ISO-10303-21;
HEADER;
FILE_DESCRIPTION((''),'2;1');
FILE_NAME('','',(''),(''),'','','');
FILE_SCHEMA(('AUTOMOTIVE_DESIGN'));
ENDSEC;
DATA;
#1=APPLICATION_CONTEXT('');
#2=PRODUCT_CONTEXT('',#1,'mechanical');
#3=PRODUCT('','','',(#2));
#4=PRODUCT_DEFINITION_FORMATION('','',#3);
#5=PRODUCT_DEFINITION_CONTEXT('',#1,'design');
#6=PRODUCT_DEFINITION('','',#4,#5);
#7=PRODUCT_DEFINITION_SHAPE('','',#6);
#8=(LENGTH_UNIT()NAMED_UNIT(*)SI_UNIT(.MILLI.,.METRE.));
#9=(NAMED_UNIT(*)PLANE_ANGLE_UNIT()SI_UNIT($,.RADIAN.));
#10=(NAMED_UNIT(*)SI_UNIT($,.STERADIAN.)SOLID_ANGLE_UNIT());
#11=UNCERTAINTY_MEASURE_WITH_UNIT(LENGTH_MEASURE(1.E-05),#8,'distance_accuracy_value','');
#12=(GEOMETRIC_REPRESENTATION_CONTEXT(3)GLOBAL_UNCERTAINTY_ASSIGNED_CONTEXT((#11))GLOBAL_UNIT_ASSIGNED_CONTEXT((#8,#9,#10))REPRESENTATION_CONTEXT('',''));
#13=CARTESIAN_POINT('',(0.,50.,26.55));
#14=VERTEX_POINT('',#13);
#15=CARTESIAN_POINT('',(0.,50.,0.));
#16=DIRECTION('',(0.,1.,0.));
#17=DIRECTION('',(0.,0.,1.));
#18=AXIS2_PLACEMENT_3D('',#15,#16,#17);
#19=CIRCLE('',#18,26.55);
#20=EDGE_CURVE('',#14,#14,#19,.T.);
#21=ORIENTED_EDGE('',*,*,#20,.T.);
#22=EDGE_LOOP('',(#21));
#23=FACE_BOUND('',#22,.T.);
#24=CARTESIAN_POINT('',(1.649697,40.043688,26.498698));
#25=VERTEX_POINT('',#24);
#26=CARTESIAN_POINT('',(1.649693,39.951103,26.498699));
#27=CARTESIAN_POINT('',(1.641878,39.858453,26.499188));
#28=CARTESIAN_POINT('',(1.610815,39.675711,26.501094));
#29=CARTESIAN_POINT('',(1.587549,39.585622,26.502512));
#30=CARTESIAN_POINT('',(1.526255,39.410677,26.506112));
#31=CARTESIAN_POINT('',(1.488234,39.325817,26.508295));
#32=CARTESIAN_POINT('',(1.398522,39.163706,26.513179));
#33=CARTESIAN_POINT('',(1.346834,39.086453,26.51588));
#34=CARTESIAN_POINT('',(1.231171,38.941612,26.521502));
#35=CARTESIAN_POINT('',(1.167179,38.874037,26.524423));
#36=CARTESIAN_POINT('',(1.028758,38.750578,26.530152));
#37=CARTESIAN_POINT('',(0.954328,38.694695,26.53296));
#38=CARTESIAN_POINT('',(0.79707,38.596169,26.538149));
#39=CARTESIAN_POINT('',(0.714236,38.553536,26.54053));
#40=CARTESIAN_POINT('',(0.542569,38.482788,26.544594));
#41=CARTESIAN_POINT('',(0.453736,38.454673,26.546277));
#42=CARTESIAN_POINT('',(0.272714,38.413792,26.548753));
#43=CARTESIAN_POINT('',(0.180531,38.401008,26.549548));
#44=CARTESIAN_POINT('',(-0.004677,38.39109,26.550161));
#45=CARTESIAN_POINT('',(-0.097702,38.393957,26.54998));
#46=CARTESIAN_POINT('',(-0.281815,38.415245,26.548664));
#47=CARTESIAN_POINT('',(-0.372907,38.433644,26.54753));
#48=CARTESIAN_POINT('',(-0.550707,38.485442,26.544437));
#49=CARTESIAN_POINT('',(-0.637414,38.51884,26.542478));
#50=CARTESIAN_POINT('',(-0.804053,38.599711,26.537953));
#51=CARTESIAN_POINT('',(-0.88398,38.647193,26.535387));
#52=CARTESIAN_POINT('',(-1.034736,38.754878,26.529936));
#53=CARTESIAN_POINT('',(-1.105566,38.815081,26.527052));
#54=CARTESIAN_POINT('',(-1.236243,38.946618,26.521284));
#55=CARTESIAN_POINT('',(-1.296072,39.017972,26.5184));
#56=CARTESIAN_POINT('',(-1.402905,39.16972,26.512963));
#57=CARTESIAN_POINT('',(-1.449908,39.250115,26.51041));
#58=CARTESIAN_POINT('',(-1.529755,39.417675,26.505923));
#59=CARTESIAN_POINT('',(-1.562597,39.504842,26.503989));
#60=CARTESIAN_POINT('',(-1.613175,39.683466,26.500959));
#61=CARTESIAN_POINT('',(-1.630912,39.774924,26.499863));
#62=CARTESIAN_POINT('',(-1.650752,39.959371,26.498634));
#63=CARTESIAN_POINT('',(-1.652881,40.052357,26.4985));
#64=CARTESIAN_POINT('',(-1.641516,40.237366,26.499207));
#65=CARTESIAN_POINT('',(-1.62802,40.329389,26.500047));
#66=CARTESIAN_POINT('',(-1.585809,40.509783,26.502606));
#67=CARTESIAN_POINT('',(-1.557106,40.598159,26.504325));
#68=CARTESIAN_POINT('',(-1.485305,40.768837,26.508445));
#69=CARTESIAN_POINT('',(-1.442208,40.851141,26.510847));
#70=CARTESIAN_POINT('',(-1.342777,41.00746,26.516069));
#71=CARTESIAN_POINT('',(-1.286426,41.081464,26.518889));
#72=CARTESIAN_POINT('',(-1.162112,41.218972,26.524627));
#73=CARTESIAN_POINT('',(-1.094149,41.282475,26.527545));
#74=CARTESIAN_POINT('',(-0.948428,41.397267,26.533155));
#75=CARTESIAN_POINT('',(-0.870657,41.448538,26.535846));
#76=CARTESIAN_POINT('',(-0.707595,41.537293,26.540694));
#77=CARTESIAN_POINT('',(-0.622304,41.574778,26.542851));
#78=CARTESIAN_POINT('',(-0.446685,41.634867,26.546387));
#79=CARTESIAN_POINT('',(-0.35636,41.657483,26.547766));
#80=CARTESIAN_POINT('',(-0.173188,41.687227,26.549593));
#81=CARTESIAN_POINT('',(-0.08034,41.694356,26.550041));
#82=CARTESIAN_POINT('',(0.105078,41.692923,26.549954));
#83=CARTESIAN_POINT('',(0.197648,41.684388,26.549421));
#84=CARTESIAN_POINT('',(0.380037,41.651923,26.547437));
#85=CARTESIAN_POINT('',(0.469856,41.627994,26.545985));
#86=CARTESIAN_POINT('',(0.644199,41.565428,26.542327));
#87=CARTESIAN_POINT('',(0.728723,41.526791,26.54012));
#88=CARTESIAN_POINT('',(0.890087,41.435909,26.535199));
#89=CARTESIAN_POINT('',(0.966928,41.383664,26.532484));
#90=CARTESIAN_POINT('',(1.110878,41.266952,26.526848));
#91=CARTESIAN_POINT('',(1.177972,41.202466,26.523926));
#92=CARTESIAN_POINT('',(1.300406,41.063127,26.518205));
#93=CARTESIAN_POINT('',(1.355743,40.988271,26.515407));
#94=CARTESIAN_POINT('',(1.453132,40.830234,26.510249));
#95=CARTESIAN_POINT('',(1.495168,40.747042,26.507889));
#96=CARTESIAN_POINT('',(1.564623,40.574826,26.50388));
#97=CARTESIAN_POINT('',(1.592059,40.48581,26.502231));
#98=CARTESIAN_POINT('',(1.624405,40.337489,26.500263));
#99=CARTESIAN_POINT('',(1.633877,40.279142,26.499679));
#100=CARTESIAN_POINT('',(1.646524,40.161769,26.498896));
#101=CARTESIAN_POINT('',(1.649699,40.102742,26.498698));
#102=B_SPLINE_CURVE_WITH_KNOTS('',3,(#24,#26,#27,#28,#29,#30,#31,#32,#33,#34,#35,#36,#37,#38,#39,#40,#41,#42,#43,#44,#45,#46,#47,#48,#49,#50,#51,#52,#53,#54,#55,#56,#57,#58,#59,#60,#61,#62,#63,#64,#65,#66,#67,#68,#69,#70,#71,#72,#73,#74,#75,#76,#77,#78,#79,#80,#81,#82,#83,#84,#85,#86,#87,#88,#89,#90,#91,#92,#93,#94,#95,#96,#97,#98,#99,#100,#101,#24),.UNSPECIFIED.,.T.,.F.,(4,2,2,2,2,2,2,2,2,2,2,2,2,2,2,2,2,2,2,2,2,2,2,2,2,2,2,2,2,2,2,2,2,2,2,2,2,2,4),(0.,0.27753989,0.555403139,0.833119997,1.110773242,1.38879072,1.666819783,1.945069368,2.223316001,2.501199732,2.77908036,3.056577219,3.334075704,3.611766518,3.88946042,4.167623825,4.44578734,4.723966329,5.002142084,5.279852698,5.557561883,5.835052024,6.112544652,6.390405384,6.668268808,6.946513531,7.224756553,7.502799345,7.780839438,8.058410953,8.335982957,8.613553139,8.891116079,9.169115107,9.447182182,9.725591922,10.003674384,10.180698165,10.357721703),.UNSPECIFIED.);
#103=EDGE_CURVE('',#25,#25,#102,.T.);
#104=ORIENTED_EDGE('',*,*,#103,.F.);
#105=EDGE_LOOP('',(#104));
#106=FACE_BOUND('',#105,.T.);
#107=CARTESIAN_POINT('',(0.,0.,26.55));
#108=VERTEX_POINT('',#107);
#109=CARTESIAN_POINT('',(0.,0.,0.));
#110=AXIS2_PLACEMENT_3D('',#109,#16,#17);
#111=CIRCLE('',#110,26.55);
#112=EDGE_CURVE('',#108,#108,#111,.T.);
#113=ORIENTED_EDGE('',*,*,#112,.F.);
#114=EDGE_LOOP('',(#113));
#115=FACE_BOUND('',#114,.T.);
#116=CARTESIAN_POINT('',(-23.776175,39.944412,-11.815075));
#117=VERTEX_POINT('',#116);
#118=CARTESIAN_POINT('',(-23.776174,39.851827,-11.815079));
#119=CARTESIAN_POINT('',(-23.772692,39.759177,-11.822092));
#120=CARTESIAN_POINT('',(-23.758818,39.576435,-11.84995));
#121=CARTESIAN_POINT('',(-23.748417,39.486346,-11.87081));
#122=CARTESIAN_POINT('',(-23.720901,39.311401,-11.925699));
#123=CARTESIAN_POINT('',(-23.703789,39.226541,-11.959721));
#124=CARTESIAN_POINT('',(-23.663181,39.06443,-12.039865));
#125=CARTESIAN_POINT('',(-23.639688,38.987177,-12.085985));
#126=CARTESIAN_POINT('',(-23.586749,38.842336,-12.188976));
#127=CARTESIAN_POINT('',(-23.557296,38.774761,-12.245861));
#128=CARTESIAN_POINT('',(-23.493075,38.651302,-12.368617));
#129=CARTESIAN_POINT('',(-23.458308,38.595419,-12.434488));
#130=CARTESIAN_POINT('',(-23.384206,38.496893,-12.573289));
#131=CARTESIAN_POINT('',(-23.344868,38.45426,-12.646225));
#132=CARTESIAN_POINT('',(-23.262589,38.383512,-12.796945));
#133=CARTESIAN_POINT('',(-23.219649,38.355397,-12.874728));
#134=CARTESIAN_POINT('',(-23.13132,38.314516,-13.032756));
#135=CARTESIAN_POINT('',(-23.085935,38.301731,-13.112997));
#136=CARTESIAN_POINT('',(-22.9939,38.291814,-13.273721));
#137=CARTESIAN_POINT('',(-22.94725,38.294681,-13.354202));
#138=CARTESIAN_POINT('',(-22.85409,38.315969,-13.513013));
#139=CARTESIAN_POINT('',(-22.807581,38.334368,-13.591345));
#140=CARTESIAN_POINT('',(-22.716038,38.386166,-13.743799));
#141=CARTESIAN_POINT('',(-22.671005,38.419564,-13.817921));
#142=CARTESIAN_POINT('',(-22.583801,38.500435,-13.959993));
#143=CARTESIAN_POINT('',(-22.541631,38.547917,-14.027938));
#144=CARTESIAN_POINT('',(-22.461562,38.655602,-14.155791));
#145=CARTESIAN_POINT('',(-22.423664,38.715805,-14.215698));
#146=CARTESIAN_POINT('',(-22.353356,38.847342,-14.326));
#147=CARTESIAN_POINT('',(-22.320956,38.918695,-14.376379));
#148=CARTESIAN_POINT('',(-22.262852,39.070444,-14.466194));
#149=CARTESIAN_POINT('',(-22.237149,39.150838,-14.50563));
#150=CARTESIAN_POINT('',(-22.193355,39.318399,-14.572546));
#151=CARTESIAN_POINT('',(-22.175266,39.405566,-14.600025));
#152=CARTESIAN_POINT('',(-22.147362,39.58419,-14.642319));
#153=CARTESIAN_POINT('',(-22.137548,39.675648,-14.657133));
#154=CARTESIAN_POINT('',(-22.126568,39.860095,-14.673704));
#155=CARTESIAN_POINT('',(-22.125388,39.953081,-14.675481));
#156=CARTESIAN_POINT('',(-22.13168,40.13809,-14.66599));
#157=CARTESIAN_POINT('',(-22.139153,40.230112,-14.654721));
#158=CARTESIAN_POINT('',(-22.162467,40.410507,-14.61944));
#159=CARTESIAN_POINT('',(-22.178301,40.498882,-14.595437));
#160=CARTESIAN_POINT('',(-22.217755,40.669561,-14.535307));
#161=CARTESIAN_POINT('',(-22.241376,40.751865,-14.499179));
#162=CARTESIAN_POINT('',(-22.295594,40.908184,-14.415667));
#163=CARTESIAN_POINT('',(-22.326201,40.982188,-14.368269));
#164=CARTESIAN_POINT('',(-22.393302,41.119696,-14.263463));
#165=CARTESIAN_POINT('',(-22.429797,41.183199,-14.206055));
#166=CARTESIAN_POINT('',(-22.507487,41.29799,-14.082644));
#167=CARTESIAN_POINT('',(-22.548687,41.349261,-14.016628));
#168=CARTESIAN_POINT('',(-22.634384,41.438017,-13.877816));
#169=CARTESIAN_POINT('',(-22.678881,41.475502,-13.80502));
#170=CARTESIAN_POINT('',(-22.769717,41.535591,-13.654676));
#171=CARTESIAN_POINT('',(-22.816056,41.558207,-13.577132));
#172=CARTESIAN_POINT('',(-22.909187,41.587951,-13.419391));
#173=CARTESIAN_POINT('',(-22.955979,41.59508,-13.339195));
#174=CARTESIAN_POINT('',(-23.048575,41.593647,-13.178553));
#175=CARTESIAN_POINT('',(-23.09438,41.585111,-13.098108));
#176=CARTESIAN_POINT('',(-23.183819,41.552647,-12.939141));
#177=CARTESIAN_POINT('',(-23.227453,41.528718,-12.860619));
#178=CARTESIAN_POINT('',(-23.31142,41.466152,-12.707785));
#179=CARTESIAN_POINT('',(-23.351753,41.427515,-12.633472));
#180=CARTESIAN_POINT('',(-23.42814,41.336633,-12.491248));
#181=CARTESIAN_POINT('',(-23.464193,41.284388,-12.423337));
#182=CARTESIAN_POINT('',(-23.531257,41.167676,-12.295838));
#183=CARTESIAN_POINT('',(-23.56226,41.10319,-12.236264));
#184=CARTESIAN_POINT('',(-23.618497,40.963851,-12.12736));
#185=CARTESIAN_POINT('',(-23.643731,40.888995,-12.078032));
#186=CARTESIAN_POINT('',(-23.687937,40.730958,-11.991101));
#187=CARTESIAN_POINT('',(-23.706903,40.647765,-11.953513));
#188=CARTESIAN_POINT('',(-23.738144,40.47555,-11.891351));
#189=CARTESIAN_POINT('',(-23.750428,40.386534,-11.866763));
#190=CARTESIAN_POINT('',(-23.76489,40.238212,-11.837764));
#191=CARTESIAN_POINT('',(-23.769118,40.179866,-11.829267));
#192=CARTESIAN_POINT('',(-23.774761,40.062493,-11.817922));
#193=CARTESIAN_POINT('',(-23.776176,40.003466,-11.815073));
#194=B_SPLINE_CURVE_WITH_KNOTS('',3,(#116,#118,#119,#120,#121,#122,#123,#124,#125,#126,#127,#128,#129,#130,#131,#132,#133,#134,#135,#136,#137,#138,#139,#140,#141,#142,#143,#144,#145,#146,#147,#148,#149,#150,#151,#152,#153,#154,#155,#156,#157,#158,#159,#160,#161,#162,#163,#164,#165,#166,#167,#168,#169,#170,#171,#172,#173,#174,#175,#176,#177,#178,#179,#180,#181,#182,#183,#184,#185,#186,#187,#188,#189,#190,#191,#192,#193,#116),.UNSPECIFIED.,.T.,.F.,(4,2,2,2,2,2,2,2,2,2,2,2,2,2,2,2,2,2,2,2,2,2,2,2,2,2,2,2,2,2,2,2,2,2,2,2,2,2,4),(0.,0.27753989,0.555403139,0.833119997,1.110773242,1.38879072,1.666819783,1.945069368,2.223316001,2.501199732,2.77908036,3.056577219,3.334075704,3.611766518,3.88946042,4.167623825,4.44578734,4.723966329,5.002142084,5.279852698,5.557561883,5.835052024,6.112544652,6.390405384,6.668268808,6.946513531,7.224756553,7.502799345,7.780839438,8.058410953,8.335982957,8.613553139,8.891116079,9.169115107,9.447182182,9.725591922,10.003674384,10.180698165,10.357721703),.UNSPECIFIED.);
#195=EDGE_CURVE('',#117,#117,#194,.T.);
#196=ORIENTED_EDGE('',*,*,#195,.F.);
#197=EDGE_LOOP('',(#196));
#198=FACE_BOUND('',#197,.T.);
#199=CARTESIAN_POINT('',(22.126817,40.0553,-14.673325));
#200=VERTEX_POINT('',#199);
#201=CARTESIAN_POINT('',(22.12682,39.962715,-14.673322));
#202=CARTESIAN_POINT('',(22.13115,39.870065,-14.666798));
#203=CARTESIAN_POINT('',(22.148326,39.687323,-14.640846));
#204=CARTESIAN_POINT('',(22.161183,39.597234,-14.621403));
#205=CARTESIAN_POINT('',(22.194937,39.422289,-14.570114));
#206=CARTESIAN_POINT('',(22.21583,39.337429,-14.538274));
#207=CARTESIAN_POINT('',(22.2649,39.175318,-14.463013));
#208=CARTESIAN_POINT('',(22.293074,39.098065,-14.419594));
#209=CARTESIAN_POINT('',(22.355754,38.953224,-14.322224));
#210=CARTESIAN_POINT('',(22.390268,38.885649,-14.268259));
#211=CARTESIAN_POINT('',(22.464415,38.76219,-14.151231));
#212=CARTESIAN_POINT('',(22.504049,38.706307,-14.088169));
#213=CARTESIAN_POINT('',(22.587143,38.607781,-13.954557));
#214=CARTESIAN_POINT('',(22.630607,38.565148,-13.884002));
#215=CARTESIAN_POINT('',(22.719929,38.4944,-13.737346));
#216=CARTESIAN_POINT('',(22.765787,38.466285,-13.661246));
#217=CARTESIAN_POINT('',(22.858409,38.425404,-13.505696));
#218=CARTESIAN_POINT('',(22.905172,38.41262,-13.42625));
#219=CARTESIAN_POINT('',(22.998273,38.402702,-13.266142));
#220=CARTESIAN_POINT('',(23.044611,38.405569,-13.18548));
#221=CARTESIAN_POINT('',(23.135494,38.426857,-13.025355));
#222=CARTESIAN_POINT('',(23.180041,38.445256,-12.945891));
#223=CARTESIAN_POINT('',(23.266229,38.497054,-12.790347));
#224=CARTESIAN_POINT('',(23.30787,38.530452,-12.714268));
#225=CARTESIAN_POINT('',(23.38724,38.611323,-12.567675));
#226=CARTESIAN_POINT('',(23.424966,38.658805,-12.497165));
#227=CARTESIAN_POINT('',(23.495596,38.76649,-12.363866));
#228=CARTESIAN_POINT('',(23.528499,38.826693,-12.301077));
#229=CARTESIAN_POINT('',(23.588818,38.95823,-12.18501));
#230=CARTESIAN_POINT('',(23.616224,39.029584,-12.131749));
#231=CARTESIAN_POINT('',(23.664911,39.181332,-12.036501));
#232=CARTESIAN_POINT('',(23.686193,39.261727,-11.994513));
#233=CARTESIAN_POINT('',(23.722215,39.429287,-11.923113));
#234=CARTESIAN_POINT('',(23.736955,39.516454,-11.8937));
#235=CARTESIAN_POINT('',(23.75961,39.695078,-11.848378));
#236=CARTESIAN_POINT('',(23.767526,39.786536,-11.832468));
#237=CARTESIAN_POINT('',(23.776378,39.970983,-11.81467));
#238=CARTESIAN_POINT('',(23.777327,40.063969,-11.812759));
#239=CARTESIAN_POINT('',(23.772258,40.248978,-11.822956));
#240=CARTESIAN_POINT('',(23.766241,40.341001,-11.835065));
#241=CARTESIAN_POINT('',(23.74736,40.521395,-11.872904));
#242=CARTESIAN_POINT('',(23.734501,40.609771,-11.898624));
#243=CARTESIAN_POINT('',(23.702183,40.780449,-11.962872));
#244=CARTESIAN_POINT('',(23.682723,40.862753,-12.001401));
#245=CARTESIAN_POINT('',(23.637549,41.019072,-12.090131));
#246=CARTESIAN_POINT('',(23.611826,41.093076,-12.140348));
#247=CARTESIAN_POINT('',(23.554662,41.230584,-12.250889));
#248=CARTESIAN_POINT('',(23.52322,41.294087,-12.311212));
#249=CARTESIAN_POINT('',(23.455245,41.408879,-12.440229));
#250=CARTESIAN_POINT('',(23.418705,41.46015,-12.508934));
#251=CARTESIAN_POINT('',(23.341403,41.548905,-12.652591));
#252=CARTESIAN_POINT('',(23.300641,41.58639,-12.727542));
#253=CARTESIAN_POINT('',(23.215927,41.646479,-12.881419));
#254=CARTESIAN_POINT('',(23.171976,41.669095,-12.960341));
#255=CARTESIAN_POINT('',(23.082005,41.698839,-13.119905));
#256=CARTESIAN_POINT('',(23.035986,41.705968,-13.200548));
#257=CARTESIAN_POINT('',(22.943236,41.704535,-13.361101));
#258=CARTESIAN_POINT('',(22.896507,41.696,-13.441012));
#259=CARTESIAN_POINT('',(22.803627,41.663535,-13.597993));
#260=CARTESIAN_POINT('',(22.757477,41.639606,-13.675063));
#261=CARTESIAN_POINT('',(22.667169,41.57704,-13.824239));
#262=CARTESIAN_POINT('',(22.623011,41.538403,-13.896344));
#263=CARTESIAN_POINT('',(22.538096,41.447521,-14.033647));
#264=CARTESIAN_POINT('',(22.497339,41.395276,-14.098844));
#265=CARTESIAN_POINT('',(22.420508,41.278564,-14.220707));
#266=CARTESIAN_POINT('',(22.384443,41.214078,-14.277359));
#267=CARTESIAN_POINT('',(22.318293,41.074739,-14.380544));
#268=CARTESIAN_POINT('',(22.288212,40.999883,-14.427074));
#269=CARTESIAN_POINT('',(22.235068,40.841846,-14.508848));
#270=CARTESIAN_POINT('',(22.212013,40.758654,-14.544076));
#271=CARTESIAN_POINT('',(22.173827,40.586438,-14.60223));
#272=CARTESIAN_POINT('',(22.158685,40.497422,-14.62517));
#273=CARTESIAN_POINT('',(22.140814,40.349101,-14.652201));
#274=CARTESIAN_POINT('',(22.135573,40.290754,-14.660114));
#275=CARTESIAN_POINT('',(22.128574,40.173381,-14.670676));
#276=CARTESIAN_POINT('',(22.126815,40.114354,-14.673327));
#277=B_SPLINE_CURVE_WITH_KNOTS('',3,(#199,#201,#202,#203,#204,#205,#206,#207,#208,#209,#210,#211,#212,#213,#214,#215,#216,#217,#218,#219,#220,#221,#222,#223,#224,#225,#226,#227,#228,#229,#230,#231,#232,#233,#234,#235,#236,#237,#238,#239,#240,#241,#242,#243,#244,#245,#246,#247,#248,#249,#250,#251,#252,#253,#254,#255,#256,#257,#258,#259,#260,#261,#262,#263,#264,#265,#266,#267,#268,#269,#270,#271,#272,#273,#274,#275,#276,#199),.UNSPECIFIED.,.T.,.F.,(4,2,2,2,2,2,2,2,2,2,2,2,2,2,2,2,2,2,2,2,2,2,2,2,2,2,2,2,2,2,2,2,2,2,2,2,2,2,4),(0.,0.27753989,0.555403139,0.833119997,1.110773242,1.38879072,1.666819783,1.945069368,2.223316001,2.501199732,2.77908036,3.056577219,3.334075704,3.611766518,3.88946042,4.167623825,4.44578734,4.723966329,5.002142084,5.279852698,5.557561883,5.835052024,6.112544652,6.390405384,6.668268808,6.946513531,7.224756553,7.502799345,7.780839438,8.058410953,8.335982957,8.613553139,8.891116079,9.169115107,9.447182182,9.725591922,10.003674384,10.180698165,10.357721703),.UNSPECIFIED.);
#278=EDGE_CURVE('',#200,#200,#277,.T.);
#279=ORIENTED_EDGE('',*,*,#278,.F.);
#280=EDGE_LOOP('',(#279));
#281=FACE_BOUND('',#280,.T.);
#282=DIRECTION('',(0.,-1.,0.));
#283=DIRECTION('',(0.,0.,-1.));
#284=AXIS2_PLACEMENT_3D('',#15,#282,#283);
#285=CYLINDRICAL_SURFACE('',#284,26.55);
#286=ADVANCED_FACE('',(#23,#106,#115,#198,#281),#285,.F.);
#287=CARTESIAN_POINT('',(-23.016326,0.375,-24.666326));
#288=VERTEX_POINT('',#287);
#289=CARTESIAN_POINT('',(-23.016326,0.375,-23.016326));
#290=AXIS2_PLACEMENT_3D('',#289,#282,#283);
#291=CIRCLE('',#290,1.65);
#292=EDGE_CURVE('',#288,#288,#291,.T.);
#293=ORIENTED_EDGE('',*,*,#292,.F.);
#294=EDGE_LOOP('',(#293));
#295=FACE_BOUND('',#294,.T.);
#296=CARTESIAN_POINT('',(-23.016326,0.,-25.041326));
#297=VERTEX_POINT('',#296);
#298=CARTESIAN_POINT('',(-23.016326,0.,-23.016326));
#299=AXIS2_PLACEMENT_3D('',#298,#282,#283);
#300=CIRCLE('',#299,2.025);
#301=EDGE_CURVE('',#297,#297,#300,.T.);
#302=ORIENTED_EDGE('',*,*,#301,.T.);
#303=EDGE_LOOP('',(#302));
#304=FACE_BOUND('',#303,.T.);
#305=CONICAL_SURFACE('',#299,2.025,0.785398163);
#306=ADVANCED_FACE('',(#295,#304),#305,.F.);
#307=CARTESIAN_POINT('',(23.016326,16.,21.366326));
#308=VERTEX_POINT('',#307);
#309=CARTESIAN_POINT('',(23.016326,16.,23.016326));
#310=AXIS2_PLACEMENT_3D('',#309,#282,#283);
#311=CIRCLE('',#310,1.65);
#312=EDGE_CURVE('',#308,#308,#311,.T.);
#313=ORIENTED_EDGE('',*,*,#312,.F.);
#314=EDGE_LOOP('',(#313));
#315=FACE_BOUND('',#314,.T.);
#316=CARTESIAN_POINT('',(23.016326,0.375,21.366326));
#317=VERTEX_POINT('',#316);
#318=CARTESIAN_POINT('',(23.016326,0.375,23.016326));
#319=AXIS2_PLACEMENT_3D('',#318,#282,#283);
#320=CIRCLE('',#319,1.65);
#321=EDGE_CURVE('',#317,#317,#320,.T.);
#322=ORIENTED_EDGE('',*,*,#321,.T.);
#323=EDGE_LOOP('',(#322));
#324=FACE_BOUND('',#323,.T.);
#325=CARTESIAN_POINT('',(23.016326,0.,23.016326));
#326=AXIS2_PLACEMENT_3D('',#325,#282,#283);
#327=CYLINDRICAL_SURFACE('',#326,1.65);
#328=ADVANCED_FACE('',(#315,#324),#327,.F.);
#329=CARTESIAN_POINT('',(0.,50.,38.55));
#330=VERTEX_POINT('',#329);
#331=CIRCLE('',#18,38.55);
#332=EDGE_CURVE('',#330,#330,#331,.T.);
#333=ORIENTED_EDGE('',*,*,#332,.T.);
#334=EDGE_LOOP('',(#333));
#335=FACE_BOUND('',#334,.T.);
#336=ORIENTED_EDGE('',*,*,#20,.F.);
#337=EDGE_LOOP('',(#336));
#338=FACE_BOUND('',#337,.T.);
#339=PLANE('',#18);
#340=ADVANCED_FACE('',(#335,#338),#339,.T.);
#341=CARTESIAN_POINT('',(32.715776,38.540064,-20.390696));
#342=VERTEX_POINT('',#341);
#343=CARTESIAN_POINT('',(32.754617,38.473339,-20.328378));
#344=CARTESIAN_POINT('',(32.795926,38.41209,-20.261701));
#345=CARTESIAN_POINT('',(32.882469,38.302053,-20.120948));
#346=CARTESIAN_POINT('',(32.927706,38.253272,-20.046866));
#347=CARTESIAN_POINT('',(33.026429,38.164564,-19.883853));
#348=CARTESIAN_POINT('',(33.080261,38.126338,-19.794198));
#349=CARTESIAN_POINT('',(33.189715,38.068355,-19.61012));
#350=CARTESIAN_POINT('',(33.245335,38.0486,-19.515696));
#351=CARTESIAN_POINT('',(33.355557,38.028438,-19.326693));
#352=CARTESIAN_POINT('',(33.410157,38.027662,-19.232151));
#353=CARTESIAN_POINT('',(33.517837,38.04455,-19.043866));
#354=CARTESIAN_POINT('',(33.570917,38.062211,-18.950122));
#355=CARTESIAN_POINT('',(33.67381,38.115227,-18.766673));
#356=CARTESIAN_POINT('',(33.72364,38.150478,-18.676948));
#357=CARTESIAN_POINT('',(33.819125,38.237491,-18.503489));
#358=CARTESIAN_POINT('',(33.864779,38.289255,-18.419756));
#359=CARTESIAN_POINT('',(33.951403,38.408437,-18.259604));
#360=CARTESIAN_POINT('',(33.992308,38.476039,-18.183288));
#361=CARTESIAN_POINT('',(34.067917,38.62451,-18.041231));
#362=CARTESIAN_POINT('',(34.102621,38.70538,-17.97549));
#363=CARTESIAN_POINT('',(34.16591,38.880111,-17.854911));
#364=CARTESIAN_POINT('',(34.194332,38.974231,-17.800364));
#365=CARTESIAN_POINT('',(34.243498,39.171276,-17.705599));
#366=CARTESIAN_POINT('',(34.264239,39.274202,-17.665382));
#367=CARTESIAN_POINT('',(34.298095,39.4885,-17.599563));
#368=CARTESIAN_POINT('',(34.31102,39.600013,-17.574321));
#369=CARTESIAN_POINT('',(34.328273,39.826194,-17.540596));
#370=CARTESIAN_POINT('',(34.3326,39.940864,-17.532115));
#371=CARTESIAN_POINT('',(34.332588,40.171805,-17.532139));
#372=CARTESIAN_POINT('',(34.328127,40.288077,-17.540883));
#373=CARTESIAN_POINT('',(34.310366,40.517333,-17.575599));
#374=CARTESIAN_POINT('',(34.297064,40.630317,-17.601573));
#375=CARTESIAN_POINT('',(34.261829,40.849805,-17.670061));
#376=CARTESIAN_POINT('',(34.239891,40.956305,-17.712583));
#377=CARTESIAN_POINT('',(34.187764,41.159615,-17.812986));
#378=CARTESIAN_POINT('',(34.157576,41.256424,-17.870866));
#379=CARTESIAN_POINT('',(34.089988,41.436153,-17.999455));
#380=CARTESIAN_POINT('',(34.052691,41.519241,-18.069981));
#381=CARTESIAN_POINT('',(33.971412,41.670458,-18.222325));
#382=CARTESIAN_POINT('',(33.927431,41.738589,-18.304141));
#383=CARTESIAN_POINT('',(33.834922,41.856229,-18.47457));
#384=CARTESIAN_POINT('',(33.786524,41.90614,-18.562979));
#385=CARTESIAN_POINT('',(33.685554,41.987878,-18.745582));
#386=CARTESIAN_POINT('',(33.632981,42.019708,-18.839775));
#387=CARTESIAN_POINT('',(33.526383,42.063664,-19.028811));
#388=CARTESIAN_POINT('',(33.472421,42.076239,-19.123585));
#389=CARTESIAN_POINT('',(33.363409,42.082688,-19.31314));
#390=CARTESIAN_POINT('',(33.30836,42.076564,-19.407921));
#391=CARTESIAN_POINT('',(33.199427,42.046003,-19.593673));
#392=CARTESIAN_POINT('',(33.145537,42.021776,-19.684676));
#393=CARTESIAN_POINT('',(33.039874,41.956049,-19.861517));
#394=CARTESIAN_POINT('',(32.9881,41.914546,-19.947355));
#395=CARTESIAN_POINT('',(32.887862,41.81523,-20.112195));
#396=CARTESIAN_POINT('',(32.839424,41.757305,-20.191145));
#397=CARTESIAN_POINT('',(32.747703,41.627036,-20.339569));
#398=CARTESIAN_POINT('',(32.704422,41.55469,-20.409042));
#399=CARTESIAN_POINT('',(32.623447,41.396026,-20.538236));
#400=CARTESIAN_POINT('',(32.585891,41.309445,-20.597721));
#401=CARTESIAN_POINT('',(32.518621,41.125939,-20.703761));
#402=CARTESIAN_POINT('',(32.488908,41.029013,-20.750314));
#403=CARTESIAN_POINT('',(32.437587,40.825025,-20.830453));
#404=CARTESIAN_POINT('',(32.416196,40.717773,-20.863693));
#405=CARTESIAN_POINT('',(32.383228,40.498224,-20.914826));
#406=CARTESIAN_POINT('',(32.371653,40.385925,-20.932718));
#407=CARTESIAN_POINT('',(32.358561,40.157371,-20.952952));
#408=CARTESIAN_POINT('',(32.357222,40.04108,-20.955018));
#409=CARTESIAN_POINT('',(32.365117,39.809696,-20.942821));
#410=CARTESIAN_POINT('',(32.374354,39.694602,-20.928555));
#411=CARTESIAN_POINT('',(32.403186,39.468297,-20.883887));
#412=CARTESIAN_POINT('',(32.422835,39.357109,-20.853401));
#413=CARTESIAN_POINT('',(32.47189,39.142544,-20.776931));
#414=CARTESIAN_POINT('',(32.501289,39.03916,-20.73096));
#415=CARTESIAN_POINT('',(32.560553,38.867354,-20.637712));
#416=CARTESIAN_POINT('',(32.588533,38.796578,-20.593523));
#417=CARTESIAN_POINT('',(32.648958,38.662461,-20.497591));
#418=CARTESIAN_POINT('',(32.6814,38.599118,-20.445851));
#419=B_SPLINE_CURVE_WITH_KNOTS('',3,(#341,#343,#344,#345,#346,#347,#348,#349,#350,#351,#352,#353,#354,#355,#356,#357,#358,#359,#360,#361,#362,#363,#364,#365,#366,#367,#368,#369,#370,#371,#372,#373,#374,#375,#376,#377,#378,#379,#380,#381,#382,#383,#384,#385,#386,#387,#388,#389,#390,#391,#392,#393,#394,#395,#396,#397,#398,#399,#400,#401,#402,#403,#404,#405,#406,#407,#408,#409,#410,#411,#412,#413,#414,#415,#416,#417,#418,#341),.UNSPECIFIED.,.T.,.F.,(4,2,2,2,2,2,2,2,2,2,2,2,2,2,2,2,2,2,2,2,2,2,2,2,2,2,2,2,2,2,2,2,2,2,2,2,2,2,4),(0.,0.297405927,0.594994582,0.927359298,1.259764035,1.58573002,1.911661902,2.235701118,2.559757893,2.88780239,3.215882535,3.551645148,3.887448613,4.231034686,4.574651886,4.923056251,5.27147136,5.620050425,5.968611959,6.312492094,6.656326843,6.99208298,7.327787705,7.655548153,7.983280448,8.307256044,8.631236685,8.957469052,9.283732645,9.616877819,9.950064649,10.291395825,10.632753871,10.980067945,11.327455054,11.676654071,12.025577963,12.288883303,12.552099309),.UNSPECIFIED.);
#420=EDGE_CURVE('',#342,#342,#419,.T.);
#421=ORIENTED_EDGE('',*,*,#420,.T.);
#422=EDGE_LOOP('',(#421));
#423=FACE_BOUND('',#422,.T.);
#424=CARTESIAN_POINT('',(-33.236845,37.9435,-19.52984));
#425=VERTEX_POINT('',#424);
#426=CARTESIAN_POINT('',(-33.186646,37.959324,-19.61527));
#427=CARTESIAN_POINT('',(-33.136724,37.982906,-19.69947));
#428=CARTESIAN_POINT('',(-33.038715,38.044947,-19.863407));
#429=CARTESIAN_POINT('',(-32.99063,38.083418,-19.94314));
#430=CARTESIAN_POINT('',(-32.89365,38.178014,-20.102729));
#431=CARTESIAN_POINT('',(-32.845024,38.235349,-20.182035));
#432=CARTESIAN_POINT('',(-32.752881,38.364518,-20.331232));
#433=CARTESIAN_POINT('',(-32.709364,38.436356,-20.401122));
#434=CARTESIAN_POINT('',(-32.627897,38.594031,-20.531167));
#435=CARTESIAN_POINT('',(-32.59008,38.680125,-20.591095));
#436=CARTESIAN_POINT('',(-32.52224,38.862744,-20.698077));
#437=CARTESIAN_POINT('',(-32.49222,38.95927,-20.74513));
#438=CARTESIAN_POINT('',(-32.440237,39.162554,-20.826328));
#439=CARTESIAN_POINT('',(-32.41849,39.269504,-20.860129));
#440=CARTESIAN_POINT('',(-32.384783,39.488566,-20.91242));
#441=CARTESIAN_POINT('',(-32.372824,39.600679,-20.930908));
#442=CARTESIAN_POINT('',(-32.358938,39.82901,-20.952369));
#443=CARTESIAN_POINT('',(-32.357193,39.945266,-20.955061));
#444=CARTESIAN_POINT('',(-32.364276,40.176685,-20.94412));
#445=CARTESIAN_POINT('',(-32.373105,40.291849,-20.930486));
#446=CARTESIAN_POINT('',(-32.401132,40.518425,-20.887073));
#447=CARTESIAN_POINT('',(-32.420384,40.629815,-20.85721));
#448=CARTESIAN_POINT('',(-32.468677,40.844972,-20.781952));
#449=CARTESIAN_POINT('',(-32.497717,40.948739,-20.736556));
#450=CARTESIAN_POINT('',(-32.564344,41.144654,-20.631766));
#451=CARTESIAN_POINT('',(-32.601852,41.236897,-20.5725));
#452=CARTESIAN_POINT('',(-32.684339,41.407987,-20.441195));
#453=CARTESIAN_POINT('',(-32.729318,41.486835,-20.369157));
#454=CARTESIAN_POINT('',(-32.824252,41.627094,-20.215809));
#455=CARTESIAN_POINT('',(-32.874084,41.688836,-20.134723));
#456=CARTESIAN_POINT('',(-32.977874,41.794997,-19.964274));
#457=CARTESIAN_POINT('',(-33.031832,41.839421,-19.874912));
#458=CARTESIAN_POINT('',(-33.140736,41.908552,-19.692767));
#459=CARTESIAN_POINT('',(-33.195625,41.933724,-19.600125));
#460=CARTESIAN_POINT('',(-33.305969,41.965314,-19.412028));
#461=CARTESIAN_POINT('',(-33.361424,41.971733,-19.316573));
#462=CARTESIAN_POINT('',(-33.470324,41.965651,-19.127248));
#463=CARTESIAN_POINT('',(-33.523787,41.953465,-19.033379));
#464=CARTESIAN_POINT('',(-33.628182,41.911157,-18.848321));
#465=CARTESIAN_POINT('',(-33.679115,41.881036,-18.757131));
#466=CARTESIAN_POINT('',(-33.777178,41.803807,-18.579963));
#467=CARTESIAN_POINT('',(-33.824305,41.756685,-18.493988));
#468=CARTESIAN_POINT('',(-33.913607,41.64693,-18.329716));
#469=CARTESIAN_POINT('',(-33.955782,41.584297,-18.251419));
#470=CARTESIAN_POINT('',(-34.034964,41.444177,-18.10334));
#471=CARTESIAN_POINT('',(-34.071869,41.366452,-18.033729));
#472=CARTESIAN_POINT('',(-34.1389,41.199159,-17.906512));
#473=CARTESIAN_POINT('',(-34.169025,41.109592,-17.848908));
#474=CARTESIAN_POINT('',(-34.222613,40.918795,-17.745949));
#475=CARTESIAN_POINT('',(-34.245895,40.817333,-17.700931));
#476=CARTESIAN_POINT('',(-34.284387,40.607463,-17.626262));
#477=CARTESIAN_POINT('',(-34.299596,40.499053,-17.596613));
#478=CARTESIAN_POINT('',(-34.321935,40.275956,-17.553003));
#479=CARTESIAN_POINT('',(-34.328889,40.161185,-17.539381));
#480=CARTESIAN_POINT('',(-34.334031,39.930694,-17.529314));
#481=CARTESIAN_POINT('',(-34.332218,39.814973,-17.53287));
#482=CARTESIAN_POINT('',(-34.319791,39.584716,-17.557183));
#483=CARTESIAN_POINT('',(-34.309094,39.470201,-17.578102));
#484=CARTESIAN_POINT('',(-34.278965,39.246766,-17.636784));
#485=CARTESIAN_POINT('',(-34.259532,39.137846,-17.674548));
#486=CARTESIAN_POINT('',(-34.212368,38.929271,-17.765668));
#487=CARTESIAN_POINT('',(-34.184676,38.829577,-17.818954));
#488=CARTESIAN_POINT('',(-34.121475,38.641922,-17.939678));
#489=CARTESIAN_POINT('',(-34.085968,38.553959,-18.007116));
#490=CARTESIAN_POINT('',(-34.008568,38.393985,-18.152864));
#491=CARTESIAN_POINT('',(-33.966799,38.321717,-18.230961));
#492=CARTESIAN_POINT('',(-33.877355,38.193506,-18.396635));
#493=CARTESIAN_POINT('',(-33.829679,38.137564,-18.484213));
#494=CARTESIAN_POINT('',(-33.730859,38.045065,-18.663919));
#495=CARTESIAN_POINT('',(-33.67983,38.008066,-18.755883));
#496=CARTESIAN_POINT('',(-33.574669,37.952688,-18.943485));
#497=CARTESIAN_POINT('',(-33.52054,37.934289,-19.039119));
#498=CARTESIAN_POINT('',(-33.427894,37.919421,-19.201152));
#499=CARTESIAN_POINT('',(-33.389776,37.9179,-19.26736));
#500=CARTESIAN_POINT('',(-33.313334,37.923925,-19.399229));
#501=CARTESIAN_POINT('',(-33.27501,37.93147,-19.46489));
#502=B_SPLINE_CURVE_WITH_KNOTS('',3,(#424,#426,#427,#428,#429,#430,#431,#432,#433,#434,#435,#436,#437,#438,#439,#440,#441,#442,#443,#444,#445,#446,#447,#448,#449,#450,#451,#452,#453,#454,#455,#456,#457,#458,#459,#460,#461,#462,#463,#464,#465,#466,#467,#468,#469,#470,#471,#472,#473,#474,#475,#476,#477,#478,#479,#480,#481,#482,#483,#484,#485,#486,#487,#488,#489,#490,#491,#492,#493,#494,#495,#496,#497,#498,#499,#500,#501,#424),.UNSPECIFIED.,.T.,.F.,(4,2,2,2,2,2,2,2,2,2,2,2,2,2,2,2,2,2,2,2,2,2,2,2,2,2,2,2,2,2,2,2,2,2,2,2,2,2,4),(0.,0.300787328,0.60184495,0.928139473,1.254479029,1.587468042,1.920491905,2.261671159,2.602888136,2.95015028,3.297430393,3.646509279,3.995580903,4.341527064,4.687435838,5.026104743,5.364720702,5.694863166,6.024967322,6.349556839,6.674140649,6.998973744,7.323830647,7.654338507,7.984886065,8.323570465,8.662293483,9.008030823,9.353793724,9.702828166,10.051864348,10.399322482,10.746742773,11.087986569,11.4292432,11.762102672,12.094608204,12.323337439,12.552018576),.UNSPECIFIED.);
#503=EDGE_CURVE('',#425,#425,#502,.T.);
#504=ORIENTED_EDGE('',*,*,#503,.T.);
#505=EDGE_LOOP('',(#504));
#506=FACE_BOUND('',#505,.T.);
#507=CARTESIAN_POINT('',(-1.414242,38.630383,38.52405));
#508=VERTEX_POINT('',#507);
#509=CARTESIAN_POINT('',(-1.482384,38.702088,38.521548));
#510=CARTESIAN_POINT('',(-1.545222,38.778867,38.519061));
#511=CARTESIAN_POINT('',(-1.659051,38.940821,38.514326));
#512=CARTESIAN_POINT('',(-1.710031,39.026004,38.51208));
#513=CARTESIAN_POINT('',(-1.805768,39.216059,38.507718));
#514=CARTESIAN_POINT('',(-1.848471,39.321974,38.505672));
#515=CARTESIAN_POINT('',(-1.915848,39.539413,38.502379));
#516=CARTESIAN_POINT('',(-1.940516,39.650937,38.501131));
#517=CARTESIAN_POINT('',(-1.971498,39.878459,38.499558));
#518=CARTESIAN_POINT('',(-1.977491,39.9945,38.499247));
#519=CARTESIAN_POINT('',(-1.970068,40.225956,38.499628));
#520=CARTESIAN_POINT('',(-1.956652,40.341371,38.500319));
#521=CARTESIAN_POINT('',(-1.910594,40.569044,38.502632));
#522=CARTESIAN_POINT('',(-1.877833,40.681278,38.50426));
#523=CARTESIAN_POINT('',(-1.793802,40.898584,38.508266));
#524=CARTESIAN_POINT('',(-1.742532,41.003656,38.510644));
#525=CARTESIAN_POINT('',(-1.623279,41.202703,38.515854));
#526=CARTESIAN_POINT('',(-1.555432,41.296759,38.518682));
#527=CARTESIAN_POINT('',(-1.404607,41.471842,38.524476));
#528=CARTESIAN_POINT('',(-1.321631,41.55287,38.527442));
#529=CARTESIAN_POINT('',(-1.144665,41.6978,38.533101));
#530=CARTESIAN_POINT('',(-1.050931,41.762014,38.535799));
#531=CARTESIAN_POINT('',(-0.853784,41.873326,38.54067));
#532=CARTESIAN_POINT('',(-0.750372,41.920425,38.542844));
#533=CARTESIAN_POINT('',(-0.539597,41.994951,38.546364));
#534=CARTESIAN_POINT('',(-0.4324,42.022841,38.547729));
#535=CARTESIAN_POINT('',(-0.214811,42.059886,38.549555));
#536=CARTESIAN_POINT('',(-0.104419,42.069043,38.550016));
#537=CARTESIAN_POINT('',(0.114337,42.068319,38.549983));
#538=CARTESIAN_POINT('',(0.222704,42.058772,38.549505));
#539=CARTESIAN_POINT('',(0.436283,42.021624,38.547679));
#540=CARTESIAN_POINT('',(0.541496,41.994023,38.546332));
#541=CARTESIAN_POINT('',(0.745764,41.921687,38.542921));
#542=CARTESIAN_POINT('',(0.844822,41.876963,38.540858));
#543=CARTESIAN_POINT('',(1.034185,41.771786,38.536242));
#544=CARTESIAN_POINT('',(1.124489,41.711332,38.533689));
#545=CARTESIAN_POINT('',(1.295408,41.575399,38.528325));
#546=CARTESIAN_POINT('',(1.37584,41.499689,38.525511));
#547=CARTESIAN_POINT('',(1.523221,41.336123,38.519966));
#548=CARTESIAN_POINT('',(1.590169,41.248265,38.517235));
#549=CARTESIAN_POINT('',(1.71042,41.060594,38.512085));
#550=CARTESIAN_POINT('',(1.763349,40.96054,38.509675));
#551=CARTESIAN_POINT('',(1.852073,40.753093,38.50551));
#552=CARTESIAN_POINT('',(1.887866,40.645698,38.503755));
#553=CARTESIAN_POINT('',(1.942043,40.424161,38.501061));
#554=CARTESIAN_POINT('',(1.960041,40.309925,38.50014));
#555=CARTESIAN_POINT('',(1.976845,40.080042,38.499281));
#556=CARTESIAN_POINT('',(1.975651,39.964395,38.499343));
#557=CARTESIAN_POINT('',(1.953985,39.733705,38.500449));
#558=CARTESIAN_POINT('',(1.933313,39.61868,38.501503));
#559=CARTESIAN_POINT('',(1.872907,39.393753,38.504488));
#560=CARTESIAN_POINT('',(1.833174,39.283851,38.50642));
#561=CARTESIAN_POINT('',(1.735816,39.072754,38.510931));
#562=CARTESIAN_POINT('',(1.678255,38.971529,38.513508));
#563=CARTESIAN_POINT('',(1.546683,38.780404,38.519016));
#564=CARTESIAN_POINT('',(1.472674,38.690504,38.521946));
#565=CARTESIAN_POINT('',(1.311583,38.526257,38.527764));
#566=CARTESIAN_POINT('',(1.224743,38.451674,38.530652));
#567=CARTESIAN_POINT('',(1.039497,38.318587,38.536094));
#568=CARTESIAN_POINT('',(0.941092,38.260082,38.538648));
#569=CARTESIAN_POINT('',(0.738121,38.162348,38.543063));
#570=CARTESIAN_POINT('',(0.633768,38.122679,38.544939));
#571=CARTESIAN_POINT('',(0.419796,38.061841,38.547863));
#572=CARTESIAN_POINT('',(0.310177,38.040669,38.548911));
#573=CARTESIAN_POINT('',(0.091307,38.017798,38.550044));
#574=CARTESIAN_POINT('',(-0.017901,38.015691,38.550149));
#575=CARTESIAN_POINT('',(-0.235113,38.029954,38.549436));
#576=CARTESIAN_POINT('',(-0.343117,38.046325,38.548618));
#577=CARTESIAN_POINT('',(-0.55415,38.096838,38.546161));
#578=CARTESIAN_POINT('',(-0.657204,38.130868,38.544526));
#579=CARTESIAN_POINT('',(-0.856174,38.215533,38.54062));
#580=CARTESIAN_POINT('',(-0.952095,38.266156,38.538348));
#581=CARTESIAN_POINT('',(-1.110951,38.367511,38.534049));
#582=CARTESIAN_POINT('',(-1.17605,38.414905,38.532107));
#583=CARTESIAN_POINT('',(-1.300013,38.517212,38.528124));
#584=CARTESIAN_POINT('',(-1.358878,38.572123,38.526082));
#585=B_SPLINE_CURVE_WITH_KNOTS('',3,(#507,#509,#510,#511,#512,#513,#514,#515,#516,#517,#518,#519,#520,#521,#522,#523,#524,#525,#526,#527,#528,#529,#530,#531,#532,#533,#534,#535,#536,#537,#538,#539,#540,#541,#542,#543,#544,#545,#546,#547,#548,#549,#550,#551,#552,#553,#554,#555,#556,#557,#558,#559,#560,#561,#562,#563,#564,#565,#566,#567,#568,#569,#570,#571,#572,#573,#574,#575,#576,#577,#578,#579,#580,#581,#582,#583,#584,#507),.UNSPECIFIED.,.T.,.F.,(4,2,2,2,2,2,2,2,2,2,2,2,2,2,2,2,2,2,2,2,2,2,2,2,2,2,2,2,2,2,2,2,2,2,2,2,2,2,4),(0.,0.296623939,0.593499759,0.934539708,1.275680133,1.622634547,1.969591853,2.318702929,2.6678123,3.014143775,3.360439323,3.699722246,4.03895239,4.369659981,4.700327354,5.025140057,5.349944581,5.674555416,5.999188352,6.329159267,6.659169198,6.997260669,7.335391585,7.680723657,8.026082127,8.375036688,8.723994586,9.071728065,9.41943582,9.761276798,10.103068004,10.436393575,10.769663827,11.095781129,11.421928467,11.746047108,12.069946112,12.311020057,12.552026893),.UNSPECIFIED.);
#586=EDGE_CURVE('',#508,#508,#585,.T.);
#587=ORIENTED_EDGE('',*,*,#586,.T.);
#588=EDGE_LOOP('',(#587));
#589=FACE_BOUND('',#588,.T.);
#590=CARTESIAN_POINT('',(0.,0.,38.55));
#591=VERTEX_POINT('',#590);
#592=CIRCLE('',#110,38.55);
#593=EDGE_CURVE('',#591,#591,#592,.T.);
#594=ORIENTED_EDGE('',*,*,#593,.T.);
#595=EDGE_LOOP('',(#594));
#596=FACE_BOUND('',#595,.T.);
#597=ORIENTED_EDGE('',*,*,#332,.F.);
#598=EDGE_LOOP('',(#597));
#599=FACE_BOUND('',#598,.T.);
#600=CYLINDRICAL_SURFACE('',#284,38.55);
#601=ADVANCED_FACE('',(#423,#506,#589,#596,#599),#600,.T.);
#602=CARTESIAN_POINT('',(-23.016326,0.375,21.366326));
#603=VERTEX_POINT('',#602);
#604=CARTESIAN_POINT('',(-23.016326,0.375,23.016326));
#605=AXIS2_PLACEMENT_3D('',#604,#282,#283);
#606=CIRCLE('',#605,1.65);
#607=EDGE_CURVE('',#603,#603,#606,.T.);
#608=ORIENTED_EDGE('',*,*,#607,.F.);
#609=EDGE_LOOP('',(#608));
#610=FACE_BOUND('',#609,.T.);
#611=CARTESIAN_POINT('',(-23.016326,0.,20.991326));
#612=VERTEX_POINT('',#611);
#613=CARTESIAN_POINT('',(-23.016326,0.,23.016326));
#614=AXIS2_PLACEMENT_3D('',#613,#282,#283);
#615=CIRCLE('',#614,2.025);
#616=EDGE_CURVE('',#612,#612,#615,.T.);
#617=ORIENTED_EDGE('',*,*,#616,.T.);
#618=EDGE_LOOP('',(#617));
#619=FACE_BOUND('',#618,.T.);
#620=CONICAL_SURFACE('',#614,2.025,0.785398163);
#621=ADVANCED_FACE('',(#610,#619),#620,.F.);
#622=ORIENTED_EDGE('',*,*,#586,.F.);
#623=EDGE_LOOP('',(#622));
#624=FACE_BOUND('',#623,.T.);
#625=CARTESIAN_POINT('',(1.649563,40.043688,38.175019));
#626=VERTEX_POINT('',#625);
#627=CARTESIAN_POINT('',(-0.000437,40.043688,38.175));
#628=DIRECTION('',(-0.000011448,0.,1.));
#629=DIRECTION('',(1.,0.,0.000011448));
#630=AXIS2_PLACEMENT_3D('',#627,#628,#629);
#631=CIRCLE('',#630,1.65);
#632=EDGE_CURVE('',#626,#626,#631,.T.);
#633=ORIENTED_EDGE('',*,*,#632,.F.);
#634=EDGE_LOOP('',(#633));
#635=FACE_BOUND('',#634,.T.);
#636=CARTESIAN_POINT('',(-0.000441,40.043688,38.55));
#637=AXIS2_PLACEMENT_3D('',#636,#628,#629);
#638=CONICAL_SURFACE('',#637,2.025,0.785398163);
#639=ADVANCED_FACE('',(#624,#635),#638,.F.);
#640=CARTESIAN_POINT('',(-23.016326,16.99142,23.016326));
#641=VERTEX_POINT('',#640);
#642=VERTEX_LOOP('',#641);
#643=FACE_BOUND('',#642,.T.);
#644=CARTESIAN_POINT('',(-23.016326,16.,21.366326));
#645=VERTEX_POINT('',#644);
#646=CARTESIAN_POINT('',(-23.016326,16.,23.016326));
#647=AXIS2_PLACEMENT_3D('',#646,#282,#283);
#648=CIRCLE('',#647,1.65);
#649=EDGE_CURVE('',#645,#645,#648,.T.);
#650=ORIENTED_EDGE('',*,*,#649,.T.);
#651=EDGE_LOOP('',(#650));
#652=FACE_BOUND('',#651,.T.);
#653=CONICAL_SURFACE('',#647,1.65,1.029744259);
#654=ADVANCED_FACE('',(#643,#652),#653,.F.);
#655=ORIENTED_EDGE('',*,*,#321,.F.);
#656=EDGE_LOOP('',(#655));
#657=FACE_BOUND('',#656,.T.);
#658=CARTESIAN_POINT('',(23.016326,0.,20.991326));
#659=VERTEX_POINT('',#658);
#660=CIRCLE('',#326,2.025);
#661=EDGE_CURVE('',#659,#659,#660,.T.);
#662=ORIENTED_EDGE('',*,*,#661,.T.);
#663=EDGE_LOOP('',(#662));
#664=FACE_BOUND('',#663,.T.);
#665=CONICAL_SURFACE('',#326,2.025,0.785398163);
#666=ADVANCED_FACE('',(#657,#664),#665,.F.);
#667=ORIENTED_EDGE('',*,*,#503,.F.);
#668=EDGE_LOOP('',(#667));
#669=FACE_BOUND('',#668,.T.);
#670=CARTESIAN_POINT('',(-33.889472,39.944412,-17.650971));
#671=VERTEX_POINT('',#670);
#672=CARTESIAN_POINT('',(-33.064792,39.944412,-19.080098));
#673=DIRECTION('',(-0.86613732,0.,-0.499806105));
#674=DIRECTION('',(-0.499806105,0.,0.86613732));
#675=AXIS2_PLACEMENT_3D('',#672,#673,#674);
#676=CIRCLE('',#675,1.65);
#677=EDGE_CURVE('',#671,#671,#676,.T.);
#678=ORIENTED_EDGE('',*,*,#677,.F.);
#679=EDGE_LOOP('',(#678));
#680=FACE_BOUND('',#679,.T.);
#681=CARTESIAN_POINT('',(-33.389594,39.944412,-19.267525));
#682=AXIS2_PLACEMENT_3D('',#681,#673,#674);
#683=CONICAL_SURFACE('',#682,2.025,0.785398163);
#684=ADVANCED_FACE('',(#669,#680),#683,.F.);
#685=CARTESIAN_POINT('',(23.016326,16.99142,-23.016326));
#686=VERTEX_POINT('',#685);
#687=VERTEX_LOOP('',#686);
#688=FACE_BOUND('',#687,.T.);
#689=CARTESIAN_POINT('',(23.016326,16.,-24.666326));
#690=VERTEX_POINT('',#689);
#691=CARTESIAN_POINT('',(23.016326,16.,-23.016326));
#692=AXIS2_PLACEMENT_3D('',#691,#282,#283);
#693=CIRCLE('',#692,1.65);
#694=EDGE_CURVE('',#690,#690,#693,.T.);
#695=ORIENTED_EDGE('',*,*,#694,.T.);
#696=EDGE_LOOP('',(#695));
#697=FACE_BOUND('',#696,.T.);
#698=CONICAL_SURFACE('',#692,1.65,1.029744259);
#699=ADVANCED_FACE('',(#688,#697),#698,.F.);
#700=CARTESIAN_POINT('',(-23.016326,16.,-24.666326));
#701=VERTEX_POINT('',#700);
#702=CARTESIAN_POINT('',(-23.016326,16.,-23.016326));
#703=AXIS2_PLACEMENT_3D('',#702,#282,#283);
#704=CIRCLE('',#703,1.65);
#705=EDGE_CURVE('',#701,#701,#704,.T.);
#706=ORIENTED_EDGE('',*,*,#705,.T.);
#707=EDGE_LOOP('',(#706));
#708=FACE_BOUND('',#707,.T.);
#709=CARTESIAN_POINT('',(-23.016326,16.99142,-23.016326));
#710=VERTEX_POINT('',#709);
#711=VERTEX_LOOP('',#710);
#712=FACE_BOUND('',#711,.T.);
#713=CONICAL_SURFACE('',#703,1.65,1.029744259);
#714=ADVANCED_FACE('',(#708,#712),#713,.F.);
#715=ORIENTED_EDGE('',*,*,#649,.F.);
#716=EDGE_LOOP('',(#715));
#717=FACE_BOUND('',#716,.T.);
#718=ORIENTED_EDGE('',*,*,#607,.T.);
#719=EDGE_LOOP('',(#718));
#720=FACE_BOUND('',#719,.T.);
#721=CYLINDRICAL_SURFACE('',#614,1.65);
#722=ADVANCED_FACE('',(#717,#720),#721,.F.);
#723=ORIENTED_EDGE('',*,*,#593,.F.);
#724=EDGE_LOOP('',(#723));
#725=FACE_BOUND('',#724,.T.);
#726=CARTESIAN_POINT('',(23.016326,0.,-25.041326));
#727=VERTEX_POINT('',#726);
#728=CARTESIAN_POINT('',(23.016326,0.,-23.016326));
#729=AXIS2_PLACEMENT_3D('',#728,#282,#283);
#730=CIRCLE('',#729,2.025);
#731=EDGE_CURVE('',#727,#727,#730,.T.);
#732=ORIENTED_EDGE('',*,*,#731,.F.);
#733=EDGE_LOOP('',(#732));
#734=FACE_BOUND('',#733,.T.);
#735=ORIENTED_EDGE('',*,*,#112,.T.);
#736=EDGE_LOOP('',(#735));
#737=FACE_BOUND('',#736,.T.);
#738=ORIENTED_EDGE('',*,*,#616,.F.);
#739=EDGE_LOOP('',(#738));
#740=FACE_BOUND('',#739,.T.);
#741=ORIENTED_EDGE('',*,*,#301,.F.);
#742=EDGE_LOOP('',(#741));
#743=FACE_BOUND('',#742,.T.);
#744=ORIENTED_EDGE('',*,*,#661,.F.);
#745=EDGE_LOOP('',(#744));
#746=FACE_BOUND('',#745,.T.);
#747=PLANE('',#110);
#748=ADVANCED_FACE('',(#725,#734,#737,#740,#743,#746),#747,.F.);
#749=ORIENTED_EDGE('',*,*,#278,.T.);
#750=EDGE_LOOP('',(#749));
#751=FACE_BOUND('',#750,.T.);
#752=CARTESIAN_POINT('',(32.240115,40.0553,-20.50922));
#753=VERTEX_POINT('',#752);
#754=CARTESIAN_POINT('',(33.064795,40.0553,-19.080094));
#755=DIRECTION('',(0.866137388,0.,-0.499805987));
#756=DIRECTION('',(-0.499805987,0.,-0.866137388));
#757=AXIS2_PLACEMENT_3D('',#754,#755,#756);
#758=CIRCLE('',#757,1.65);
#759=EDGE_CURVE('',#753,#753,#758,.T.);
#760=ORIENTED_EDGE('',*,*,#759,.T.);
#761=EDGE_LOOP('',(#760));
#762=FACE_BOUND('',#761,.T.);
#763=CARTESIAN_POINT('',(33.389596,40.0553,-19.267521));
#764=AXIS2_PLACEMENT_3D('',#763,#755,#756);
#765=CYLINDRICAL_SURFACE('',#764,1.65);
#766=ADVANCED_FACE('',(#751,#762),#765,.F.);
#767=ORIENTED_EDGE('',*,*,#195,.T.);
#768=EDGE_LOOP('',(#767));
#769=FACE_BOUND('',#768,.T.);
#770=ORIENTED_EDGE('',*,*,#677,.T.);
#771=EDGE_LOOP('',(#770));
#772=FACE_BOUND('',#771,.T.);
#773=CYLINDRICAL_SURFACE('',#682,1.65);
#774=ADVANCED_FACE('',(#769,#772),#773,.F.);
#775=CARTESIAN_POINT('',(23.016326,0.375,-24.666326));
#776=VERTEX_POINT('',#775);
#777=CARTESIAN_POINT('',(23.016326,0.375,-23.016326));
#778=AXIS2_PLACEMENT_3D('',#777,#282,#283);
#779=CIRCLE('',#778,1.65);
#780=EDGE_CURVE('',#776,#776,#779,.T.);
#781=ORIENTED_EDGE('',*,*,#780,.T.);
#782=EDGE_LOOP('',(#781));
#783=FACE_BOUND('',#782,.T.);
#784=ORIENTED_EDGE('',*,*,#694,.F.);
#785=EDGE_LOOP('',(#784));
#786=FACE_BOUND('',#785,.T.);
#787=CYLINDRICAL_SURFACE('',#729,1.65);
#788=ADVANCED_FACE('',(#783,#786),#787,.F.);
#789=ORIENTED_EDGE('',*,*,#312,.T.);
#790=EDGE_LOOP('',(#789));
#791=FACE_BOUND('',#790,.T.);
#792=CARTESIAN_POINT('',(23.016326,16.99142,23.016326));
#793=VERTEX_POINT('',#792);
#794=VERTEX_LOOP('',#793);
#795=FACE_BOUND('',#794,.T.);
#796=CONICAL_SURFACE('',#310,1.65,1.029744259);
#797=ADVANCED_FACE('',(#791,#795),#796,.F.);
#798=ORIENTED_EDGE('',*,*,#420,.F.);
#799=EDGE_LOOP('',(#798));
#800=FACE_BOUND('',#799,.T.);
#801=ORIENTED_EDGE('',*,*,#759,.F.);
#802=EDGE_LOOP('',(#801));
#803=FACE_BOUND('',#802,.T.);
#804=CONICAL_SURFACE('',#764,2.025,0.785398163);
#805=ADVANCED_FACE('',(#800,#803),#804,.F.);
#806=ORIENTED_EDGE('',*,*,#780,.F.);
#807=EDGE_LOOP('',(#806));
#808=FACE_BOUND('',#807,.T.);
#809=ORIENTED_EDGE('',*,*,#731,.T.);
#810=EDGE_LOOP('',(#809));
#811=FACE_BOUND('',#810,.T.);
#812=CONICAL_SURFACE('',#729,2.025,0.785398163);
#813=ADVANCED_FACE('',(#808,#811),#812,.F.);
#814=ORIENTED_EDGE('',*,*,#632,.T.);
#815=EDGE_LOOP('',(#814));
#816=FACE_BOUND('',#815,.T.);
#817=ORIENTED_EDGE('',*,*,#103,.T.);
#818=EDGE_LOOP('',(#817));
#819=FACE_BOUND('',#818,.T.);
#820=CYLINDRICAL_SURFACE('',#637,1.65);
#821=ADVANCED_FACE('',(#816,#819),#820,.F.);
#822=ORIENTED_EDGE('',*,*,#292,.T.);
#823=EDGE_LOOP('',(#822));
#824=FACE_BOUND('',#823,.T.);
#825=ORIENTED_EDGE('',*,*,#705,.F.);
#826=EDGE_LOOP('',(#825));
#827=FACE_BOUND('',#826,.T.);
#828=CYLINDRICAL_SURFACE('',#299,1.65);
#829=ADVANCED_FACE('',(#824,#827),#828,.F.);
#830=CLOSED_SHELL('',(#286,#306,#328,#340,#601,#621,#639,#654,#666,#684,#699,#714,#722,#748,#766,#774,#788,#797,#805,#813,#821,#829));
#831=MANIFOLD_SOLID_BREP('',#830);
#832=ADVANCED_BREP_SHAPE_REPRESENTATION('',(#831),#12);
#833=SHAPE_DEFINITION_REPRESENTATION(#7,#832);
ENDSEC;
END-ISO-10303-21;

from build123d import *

# Parameters (mm, degrees)
ESQUISSE1_R                     = 38.550000000000004
ESQUISSE1_R_2                   = 26.55
BOSS_EXTRU_1_DEPTH              = 50
TROU_TARAUD_M4X0_71_D           = 3.3
TROU_TARAUD_M4X0_71_DEPTH       = 16
TROU_TARAUD_M4X0_71_CSINK_D     = 4.05
TROU_TARAUD_M4X0_71_CSINK_ANGLE = 90
TROU_TARAUD_M4X0_71_TIP         = 0.9914200213954745


# Read off the part's stored shape, not the designer's step: Trou taraudé M4x0.74
with BuildPart() as part:
    # Esquisse1 → Boss.-Extru.1 (new body)
    with BuildSketch(Plane(origin=(0, 0, 0), x_dir=(1, 0, 0), z_dir=(0, 1, 0))):
        with Locations(Location((0, 0, 0), (0, 0, 270))):
            Circle(ESQUISSE1_R)
        with Locations(Location((0, 0, 0), (0, 0, 270))):
            Circle(ESQUISSE1_R_2, mode=Mode.SUBTRACT)
    extrude(amount=BOSS_EXTRU_1_DEPTH)

    # Trou taraudé M4x0.71
    with Locations(Plane(origin=(0, 0, 0), x_dir=(-1, 0, 0), z_dir=(0, -1, 0))):
        with Locations((-23.016325728, -23.016325728), (-23.016325728, 23.016325728), (23.016325728, 23.016325728), (23.016325728, -23.016325728)):
            CounterSinkHole(TROU_TARAUD_M4X0_71_D / 2, TROU_TARAUD_M4X0_71_CSINK_D / 2, depth=TROU_TARAUD_M4X0_71_DEPTH, counter_sink_angle=TROU_TARAUD_M4X0_71_CSINK_ANGLE)
            with Locations((0, 0, -(TROU_TARAUD_M4X0_71_DEPTH + TROU_TARAUD_M4X0_71_TIP / 2))):  # 118° drill point
                Cone(0, TROU_TARAUD_M4X0_71_D / 2, TROU_TARAUD_M4X0_71_TIP, mode=Mode.SUBTRACT)

    # Trou taraudé M4x0.74 outline → Trou taraudé M4x0.74 (revolve, cut)
    with BuildSketch(Plane(origin=(0, 39.944411858, 0), x_dir=(0.4998061049474771, 0, -0.8661373202080785), z_dir=(0, -1, 0))):
        Polygon((0, -38.55002295), (2.02502295, -38.55002295), (1.65, -38.175), (1.65, -26.498651577), (0, -26.498651577), align=None)
    revolve(axis=Axis((0, 39.944411858, 0), (0.8661373202080785, 0, 0.4998061049474771)), mode=Mode.SUBTRACT)

    # Trou taraud_ M4x0.74 2 outline → Trou taraud_ M4x0.74 2 (revolve, cut)
    with BuildSketch(Plane(origin=(0, 40.055300006, 0), x_dir=(0.49980598723152586, 0, 0.8661373881362702), z_dir=(0, 1.0000000000000002, 0))):
        Polygon((2.025014074, 38.550014074), (0, 38.550014074), (0, 26.498651577), (1.65, 26.498651577), (1.65, 38.175), align=None)
    revolve(axis=Axis((0, 40.055300006, 0), (0.8661373881362704, 0, -0.49980598723152597)), mode=Mode.SUBTRACT)

    # Trou taraud_ M4x0.74 3 outline → Trou taraud_ M4x0.74 3 (revolve, cut)
    with BuildSketch(Plane(origin=(0, 40.043688013, 0), x_dir=(0.9999999999344692, 0, 1.1448216284808903e-05), z_dir=(0, 1, 0))):
        Polygon((0, -38.549999963), (2.024999963, -38.549999963), (1.65, -38.175), (1.65, -26.498658226), (0, -26.498658226), align=None)
    revolve(axis=Axis((0, 40.043688013, 0), (1.1448216284808903e-05, 0, -0.9999999999344692)), mode=Mode.SUBTRACT)


solid = part.part
